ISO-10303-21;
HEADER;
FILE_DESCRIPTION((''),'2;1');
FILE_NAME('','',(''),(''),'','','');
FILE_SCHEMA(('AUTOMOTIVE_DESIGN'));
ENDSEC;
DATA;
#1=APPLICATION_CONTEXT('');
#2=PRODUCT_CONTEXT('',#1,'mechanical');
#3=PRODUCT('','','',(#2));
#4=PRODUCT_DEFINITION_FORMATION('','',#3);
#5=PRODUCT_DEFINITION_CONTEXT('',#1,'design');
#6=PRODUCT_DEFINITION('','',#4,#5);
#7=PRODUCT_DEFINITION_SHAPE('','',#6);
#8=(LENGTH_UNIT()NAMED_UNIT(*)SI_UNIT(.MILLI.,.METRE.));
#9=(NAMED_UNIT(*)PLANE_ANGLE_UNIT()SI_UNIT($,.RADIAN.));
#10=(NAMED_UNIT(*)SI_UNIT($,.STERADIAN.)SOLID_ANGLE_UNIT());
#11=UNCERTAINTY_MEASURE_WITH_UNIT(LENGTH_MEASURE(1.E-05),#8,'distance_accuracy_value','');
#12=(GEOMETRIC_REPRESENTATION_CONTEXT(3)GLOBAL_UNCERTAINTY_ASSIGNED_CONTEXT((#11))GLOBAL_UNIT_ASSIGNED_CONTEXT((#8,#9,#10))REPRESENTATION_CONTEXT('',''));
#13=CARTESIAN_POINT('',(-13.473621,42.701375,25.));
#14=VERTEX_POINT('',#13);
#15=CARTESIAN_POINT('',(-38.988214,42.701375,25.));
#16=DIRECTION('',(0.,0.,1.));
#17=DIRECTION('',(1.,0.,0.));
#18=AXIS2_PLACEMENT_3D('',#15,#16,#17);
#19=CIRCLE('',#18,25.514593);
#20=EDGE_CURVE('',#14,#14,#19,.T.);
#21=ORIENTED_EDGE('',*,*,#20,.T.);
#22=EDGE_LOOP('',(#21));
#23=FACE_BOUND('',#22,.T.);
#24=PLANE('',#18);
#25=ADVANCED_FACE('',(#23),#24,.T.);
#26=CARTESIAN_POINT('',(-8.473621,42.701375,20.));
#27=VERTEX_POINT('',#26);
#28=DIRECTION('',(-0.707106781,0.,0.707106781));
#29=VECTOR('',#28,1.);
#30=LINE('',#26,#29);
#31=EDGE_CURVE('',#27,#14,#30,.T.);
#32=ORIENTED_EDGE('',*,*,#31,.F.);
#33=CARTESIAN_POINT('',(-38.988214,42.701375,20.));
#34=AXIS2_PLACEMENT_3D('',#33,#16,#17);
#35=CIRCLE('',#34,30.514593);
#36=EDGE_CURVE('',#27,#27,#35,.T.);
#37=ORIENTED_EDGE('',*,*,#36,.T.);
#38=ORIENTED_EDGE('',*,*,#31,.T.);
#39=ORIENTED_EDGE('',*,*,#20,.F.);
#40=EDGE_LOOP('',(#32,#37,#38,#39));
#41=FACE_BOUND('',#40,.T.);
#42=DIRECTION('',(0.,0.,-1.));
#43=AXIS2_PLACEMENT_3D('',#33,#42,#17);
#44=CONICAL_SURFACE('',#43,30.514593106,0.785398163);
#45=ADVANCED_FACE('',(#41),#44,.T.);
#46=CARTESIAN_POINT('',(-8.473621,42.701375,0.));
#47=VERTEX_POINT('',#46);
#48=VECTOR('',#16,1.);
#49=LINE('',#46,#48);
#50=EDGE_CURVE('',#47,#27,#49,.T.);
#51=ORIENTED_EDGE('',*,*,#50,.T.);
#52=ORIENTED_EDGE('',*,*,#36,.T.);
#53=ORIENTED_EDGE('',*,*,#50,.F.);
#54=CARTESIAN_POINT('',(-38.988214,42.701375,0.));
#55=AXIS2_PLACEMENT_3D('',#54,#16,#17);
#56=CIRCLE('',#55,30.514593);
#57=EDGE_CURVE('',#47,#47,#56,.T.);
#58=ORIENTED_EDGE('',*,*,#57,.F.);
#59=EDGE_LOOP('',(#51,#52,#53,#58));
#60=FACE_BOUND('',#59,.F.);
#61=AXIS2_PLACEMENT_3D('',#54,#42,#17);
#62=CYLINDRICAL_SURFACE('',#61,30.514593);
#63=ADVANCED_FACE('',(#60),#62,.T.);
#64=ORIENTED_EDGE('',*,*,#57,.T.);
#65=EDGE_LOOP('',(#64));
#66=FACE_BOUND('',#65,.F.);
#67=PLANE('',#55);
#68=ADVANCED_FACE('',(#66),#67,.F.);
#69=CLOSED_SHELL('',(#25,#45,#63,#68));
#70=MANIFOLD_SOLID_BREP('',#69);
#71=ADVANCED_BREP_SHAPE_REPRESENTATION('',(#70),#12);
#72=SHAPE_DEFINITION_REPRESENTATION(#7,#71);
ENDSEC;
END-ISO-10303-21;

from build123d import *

# Parameters (mm, degrees)
F0_R     = 30.5145931063
F1_DEPTH = 25
F4_SIZE  = 5


# Not quite as in the source:
# - the program builds the solid bodies; features that only make, move or delete a surface that nothing else refers to are left out


with BuildPart() as f1:
    # F0 (on Top) → F1 (new body)
    with BuildSketch(Plane.XY):
        with Locations((-38.9882139862, 42.7013747394)):
            Circle(F0_R)
    extrude(amount=F1_DEPTH)

    # F4
    f4_edges = [f1.edges().sort_by_distance(p)[0] for p in [
        (-69.502807, 42.701375, 25),
    ]]
    chamfer(f4_edges, length=F4_SIZE)


solid = f1.part
